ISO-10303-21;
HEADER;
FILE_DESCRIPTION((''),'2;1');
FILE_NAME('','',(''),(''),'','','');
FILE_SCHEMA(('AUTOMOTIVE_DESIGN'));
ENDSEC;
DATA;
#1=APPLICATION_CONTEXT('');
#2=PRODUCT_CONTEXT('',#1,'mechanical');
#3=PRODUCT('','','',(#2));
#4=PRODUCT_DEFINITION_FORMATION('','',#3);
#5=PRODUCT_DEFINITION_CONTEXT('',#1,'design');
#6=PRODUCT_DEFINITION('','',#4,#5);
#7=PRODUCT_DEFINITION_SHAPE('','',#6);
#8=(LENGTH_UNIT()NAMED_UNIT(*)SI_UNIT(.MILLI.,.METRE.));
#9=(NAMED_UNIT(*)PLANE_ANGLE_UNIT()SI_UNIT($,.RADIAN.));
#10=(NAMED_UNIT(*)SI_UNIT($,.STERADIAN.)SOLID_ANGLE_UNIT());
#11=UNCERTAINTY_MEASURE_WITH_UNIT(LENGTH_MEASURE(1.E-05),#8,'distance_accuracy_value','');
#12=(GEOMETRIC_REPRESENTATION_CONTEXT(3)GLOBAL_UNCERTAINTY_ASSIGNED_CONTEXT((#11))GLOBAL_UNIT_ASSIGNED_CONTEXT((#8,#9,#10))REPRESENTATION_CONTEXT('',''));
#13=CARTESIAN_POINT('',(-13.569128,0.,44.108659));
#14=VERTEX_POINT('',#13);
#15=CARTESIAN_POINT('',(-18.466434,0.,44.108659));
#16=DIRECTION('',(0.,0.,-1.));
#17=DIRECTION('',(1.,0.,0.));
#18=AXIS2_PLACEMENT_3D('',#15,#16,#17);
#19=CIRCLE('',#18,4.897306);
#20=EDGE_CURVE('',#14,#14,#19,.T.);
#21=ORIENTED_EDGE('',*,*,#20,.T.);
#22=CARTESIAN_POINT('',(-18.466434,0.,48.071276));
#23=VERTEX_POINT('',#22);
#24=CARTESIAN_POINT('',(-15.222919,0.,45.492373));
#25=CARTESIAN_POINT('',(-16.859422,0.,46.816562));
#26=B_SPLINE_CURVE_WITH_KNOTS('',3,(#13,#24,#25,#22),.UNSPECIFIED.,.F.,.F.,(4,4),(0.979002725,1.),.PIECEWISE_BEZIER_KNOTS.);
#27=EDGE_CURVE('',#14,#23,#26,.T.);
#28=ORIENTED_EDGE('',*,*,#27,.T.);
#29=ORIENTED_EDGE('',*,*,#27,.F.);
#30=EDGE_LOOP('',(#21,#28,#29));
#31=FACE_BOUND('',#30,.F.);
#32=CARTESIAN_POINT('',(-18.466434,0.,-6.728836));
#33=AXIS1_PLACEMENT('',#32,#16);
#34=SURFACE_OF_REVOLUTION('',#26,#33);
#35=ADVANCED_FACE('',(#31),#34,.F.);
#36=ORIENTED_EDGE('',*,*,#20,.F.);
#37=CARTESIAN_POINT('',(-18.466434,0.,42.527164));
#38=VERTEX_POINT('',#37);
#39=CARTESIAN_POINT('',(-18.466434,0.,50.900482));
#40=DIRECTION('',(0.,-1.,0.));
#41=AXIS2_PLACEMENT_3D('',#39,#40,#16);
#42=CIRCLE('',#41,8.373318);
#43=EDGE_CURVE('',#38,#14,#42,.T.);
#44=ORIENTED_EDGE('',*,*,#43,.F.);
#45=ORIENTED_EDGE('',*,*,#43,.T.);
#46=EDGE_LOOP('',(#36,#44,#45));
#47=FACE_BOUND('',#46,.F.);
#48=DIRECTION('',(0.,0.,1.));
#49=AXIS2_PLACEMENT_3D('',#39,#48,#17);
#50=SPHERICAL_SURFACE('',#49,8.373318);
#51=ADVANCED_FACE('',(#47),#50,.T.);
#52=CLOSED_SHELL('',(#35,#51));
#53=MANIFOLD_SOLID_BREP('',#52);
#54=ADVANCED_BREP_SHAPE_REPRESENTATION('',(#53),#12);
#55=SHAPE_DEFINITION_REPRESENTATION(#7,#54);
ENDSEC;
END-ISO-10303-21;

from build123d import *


with BuildPart() as f1:
    # F0 (on Front) → F1 (revolve)
    with BuildSketch(Plane.XZ):
        with BuildLine():
            add(Edge.make_bspline(
                [(-13.569127879, 44.1086594113), (-15.2229193766, 45.4923734906), (-16.8594223359, 46.8165619182), (-18.4664335102, 48.0712763965)],
                knots=[0.9790027247, 0.9790027247, 0.9790027247, 0.9790027247, 1, 1, 1, 1], degree=3))
            Line((-18.4664335102, 48.0712763965), (-18.4664335102, 42.5271638013))
            ThreePointArc((-18.4664335102, 42.5271638013), (-15.8932676192, 42.9323407699), (-13.569127879, 44.1086594113))
        make_face()
    revolve(axis=Axis((-18.4664335102, 0, -6.7288363023), (0, 0, -1)))


solid = f1.part
